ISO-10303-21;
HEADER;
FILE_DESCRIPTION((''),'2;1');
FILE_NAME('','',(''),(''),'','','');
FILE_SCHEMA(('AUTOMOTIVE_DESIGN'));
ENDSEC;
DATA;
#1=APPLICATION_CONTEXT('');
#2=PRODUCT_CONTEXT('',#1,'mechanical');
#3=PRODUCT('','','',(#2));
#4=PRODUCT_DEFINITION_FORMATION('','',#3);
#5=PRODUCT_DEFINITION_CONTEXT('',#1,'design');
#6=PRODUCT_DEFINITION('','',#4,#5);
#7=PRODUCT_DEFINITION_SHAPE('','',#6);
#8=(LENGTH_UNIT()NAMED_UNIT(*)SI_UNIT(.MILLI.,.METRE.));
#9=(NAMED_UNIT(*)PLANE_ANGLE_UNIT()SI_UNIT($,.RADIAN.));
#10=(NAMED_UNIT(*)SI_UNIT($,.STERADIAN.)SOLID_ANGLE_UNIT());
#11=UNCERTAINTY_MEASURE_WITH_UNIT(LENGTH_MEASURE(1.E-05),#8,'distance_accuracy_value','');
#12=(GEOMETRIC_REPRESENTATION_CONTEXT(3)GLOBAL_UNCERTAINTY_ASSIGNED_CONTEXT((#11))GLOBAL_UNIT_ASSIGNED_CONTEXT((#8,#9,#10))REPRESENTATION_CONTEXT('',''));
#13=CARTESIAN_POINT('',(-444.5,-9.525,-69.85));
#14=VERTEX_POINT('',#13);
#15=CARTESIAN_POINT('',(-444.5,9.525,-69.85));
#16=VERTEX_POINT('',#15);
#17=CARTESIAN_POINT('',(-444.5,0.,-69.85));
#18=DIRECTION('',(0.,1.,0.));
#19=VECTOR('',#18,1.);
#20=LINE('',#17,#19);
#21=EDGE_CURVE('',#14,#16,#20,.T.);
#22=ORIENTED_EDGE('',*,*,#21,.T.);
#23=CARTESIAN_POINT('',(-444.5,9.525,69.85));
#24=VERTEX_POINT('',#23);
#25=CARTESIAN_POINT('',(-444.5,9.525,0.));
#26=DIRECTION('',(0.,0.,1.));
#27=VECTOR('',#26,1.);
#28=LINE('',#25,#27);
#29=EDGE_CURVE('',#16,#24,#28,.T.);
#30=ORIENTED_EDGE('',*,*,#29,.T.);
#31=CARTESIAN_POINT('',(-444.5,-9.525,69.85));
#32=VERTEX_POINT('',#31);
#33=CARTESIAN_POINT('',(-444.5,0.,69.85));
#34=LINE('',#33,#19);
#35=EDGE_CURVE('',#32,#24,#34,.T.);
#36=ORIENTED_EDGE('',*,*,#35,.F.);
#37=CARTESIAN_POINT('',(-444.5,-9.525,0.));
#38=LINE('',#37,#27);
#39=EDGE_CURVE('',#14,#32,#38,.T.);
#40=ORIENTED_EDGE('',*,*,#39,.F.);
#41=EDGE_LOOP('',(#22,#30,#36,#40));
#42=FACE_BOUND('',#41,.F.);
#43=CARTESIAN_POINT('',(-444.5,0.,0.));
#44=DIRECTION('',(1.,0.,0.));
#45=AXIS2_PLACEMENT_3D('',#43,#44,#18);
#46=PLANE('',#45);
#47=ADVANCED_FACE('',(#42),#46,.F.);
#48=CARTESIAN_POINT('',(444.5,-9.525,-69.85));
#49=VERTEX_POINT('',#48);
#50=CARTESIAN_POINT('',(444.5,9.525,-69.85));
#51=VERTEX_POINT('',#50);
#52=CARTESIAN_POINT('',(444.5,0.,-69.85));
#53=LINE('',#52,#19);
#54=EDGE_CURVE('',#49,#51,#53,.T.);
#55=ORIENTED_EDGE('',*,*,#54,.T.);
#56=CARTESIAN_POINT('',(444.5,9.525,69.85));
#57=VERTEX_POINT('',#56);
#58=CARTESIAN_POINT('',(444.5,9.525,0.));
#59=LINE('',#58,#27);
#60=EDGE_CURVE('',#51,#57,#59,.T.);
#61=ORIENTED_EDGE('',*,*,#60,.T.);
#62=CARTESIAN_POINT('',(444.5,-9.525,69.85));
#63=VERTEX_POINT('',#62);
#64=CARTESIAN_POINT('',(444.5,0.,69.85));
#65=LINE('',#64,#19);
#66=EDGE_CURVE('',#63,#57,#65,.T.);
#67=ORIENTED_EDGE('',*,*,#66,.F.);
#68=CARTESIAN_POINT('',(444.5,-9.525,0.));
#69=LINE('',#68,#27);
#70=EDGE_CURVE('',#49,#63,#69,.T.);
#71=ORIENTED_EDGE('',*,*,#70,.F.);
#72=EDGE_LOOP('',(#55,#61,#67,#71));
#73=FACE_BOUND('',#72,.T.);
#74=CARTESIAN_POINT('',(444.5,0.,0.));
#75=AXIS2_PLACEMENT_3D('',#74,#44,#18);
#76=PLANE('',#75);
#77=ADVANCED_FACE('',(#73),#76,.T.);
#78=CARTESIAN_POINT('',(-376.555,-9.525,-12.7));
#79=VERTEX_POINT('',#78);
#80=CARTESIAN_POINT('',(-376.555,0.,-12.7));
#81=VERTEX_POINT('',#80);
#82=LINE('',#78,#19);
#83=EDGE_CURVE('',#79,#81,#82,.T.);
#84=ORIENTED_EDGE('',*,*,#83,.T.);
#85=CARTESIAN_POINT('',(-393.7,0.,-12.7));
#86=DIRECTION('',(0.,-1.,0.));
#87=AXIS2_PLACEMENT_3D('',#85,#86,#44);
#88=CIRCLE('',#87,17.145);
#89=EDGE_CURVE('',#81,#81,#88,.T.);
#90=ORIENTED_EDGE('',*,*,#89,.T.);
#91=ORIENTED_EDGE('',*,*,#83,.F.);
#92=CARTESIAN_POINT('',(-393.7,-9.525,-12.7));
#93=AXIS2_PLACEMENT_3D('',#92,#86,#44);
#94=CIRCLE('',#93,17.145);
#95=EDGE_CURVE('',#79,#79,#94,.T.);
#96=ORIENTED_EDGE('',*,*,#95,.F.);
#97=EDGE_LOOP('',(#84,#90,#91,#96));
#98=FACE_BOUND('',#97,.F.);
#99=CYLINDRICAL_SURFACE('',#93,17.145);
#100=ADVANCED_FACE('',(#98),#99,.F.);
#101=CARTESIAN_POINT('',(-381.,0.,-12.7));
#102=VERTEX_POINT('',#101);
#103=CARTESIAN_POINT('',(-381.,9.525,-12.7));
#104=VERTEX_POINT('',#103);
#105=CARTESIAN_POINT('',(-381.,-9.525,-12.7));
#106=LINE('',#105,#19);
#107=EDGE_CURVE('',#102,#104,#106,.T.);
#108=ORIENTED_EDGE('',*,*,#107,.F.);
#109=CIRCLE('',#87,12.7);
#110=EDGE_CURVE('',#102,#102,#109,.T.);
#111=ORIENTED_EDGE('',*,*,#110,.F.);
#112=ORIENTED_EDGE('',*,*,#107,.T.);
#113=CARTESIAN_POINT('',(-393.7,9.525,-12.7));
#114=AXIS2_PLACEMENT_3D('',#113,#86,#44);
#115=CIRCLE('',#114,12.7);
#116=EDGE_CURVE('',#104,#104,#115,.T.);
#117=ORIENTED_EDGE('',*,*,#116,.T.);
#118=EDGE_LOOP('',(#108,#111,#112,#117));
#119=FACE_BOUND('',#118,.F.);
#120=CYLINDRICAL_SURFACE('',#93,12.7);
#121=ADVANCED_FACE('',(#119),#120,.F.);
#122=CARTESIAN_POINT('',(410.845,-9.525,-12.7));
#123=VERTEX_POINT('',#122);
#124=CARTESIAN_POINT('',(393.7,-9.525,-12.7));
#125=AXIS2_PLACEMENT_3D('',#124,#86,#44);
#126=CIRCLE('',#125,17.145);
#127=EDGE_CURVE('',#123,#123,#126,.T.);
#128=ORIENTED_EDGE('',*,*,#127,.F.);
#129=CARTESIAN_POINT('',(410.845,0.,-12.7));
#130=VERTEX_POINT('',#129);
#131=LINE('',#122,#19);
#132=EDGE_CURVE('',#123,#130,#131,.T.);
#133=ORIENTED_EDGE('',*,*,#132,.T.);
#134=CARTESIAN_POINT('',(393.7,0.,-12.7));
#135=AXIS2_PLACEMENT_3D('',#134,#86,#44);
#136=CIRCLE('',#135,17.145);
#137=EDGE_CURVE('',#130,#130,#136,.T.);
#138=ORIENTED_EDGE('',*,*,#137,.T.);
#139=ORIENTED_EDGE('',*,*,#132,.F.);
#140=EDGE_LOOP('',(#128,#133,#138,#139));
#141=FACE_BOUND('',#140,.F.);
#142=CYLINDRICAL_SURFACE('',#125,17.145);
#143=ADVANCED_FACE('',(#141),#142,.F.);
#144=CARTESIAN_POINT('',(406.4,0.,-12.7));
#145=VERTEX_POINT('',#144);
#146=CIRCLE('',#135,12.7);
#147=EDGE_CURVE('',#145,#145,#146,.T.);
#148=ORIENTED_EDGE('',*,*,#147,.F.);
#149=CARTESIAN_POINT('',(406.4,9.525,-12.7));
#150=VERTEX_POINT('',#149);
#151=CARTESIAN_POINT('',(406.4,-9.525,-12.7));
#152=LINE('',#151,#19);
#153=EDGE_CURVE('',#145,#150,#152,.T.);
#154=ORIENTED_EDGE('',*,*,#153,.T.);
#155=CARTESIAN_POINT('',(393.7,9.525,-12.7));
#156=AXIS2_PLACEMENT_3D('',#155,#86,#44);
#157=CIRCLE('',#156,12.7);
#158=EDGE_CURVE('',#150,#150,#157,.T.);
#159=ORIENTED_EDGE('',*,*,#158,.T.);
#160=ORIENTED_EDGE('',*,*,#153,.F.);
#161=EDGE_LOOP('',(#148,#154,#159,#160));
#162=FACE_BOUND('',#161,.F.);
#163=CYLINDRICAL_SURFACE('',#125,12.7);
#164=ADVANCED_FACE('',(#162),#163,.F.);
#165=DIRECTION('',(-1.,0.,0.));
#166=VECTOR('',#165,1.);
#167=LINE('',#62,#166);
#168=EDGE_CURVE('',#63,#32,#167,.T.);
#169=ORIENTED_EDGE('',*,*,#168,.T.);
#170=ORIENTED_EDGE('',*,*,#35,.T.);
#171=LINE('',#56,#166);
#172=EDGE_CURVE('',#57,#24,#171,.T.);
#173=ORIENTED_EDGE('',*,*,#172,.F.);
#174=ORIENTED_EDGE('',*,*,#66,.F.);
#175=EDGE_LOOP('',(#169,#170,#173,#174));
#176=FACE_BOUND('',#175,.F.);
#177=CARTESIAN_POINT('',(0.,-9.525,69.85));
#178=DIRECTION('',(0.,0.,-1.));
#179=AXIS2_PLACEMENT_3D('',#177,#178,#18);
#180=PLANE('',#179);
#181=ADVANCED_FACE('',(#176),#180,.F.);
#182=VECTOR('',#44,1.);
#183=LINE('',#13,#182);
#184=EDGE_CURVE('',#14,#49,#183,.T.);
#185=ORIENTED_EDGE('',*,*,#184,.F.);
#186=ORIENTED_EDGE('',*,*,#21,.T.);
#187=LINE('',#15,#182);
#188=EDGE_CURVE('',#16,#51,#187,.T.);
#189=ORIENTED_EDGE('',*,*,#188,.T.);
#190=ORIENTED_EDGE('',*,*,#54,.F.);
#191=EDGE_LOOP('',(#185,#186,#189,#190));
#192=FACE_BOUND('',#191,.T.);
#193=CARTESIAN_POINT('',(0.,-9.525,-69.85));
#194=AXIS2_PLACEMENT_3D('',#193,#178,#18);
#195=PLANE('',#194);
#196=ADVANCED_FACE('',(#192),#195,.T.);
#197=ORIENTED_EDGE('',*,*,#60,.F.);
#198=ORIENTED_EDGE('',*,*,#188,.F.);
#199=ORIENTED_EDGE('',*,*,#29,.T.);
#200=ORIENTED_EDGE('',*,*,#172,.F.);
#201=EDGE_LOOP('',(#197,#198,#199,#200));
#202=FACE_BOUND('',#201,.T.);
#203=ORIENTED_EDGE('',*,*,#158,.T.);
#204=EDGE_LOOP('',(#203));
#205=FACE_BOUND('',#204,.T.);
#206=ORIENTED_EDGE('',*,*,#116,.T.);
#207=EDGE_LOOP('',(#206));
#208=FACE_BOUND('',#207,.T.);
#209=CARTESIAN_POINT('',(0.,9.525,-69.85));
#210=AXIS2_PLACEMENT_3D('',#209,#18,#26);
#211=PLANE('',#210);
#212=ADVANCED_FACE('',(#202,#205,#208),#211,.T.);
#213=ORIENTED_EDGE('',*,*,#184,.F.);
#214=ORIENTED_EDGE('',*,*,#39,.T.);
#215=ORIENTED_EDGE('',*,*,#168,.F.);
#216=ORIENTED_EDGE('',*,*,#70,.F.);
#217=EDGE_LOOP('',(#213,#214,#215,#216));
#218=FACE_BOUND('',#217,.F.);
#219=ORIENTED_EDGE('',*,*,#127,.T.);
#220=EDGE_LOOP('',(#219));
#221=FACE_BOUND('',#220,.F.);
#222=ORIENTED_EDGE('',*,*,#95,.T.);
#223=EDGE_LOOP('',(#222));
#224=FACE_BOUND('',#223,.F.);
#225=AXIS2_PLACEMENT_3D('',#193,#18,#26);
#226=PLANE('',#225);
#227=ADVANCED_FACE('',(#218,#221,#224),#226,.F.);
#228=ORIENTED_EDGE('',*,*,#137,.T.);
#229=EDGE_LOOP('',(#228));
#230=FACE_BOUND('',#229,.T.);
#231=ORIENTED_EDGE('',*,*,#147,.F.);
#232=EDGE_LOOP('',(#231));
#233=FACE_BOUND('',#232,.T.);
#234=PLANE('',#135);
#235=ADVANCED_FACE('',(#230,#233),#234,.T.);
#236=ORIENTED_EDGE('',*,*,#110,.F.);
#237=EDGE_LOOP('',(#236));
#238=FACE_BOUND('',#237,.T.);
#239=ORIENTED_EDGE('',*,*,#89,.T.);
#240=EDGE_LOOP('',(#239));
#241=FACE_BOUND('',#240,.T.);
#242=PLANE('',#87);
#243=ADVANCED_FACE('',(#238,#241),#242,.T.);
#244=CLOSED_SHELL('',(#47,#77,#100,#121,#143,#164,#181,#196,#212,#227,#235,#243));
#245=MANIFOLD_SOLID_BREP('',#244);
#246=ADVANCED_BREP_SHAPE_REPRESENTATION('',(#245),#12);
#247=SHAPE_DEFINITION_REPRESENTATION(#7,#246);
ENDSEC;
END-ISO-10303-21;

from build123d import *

# Parameters (mm, degrees)
F0_W     = 19.05
F0_H     = 139.7
F1_DEPTH = 444.5
F2_R     = 12.7
F3_DEPTH = 19.051
F4_R     = 17.145
F4_R_2   = 12.7
F5_DEPTH = 9.525


with BuildPart() as f1:
    # F0 (on Right) → F1 (new body, symmetric)
    with BuildSketch(Plane.YZ):
        Rectangle(F0_W, F0_H)
    extrude(amount=F1_DEPTH, both=True)

    # F2 (on face) → F3 (cut, through all)
    with BuildSketch(Plane.XZ.offset(9.525)):
        with Locations((-393.7, -12.7)):
            Circle(F2_R)
        with Locations((393.7, -12.7)):
            Circle(F2_R)
    extrude(amount=-F3_DEPTH, mode=Mode.SUBTRACT)

    # F4 (on face) → F5 (cut)
    with BuildSketch(Plane.XZ.offset(9.525)):
        with Locations((-393.7, -12.7)):
            Circle(F4_R)
        with Locations((-393.7, -12.7)):
            Circle(F4_R_2, mode=Mode.SUBTRACT)
        with Locations((393.7, -12.7)):
            Circle(F4_R)
        with Locations((393.7, -12.7)):
            Circle(F4_R_2, mode=Mode.SUBTRACT)
        with Locations((-393.7, -12.7)):
            Circle(F4_R_2)
    extrude(amount=-F5_DEPTH, mode=Mode.SUBTRACT)


solid = f1.part
